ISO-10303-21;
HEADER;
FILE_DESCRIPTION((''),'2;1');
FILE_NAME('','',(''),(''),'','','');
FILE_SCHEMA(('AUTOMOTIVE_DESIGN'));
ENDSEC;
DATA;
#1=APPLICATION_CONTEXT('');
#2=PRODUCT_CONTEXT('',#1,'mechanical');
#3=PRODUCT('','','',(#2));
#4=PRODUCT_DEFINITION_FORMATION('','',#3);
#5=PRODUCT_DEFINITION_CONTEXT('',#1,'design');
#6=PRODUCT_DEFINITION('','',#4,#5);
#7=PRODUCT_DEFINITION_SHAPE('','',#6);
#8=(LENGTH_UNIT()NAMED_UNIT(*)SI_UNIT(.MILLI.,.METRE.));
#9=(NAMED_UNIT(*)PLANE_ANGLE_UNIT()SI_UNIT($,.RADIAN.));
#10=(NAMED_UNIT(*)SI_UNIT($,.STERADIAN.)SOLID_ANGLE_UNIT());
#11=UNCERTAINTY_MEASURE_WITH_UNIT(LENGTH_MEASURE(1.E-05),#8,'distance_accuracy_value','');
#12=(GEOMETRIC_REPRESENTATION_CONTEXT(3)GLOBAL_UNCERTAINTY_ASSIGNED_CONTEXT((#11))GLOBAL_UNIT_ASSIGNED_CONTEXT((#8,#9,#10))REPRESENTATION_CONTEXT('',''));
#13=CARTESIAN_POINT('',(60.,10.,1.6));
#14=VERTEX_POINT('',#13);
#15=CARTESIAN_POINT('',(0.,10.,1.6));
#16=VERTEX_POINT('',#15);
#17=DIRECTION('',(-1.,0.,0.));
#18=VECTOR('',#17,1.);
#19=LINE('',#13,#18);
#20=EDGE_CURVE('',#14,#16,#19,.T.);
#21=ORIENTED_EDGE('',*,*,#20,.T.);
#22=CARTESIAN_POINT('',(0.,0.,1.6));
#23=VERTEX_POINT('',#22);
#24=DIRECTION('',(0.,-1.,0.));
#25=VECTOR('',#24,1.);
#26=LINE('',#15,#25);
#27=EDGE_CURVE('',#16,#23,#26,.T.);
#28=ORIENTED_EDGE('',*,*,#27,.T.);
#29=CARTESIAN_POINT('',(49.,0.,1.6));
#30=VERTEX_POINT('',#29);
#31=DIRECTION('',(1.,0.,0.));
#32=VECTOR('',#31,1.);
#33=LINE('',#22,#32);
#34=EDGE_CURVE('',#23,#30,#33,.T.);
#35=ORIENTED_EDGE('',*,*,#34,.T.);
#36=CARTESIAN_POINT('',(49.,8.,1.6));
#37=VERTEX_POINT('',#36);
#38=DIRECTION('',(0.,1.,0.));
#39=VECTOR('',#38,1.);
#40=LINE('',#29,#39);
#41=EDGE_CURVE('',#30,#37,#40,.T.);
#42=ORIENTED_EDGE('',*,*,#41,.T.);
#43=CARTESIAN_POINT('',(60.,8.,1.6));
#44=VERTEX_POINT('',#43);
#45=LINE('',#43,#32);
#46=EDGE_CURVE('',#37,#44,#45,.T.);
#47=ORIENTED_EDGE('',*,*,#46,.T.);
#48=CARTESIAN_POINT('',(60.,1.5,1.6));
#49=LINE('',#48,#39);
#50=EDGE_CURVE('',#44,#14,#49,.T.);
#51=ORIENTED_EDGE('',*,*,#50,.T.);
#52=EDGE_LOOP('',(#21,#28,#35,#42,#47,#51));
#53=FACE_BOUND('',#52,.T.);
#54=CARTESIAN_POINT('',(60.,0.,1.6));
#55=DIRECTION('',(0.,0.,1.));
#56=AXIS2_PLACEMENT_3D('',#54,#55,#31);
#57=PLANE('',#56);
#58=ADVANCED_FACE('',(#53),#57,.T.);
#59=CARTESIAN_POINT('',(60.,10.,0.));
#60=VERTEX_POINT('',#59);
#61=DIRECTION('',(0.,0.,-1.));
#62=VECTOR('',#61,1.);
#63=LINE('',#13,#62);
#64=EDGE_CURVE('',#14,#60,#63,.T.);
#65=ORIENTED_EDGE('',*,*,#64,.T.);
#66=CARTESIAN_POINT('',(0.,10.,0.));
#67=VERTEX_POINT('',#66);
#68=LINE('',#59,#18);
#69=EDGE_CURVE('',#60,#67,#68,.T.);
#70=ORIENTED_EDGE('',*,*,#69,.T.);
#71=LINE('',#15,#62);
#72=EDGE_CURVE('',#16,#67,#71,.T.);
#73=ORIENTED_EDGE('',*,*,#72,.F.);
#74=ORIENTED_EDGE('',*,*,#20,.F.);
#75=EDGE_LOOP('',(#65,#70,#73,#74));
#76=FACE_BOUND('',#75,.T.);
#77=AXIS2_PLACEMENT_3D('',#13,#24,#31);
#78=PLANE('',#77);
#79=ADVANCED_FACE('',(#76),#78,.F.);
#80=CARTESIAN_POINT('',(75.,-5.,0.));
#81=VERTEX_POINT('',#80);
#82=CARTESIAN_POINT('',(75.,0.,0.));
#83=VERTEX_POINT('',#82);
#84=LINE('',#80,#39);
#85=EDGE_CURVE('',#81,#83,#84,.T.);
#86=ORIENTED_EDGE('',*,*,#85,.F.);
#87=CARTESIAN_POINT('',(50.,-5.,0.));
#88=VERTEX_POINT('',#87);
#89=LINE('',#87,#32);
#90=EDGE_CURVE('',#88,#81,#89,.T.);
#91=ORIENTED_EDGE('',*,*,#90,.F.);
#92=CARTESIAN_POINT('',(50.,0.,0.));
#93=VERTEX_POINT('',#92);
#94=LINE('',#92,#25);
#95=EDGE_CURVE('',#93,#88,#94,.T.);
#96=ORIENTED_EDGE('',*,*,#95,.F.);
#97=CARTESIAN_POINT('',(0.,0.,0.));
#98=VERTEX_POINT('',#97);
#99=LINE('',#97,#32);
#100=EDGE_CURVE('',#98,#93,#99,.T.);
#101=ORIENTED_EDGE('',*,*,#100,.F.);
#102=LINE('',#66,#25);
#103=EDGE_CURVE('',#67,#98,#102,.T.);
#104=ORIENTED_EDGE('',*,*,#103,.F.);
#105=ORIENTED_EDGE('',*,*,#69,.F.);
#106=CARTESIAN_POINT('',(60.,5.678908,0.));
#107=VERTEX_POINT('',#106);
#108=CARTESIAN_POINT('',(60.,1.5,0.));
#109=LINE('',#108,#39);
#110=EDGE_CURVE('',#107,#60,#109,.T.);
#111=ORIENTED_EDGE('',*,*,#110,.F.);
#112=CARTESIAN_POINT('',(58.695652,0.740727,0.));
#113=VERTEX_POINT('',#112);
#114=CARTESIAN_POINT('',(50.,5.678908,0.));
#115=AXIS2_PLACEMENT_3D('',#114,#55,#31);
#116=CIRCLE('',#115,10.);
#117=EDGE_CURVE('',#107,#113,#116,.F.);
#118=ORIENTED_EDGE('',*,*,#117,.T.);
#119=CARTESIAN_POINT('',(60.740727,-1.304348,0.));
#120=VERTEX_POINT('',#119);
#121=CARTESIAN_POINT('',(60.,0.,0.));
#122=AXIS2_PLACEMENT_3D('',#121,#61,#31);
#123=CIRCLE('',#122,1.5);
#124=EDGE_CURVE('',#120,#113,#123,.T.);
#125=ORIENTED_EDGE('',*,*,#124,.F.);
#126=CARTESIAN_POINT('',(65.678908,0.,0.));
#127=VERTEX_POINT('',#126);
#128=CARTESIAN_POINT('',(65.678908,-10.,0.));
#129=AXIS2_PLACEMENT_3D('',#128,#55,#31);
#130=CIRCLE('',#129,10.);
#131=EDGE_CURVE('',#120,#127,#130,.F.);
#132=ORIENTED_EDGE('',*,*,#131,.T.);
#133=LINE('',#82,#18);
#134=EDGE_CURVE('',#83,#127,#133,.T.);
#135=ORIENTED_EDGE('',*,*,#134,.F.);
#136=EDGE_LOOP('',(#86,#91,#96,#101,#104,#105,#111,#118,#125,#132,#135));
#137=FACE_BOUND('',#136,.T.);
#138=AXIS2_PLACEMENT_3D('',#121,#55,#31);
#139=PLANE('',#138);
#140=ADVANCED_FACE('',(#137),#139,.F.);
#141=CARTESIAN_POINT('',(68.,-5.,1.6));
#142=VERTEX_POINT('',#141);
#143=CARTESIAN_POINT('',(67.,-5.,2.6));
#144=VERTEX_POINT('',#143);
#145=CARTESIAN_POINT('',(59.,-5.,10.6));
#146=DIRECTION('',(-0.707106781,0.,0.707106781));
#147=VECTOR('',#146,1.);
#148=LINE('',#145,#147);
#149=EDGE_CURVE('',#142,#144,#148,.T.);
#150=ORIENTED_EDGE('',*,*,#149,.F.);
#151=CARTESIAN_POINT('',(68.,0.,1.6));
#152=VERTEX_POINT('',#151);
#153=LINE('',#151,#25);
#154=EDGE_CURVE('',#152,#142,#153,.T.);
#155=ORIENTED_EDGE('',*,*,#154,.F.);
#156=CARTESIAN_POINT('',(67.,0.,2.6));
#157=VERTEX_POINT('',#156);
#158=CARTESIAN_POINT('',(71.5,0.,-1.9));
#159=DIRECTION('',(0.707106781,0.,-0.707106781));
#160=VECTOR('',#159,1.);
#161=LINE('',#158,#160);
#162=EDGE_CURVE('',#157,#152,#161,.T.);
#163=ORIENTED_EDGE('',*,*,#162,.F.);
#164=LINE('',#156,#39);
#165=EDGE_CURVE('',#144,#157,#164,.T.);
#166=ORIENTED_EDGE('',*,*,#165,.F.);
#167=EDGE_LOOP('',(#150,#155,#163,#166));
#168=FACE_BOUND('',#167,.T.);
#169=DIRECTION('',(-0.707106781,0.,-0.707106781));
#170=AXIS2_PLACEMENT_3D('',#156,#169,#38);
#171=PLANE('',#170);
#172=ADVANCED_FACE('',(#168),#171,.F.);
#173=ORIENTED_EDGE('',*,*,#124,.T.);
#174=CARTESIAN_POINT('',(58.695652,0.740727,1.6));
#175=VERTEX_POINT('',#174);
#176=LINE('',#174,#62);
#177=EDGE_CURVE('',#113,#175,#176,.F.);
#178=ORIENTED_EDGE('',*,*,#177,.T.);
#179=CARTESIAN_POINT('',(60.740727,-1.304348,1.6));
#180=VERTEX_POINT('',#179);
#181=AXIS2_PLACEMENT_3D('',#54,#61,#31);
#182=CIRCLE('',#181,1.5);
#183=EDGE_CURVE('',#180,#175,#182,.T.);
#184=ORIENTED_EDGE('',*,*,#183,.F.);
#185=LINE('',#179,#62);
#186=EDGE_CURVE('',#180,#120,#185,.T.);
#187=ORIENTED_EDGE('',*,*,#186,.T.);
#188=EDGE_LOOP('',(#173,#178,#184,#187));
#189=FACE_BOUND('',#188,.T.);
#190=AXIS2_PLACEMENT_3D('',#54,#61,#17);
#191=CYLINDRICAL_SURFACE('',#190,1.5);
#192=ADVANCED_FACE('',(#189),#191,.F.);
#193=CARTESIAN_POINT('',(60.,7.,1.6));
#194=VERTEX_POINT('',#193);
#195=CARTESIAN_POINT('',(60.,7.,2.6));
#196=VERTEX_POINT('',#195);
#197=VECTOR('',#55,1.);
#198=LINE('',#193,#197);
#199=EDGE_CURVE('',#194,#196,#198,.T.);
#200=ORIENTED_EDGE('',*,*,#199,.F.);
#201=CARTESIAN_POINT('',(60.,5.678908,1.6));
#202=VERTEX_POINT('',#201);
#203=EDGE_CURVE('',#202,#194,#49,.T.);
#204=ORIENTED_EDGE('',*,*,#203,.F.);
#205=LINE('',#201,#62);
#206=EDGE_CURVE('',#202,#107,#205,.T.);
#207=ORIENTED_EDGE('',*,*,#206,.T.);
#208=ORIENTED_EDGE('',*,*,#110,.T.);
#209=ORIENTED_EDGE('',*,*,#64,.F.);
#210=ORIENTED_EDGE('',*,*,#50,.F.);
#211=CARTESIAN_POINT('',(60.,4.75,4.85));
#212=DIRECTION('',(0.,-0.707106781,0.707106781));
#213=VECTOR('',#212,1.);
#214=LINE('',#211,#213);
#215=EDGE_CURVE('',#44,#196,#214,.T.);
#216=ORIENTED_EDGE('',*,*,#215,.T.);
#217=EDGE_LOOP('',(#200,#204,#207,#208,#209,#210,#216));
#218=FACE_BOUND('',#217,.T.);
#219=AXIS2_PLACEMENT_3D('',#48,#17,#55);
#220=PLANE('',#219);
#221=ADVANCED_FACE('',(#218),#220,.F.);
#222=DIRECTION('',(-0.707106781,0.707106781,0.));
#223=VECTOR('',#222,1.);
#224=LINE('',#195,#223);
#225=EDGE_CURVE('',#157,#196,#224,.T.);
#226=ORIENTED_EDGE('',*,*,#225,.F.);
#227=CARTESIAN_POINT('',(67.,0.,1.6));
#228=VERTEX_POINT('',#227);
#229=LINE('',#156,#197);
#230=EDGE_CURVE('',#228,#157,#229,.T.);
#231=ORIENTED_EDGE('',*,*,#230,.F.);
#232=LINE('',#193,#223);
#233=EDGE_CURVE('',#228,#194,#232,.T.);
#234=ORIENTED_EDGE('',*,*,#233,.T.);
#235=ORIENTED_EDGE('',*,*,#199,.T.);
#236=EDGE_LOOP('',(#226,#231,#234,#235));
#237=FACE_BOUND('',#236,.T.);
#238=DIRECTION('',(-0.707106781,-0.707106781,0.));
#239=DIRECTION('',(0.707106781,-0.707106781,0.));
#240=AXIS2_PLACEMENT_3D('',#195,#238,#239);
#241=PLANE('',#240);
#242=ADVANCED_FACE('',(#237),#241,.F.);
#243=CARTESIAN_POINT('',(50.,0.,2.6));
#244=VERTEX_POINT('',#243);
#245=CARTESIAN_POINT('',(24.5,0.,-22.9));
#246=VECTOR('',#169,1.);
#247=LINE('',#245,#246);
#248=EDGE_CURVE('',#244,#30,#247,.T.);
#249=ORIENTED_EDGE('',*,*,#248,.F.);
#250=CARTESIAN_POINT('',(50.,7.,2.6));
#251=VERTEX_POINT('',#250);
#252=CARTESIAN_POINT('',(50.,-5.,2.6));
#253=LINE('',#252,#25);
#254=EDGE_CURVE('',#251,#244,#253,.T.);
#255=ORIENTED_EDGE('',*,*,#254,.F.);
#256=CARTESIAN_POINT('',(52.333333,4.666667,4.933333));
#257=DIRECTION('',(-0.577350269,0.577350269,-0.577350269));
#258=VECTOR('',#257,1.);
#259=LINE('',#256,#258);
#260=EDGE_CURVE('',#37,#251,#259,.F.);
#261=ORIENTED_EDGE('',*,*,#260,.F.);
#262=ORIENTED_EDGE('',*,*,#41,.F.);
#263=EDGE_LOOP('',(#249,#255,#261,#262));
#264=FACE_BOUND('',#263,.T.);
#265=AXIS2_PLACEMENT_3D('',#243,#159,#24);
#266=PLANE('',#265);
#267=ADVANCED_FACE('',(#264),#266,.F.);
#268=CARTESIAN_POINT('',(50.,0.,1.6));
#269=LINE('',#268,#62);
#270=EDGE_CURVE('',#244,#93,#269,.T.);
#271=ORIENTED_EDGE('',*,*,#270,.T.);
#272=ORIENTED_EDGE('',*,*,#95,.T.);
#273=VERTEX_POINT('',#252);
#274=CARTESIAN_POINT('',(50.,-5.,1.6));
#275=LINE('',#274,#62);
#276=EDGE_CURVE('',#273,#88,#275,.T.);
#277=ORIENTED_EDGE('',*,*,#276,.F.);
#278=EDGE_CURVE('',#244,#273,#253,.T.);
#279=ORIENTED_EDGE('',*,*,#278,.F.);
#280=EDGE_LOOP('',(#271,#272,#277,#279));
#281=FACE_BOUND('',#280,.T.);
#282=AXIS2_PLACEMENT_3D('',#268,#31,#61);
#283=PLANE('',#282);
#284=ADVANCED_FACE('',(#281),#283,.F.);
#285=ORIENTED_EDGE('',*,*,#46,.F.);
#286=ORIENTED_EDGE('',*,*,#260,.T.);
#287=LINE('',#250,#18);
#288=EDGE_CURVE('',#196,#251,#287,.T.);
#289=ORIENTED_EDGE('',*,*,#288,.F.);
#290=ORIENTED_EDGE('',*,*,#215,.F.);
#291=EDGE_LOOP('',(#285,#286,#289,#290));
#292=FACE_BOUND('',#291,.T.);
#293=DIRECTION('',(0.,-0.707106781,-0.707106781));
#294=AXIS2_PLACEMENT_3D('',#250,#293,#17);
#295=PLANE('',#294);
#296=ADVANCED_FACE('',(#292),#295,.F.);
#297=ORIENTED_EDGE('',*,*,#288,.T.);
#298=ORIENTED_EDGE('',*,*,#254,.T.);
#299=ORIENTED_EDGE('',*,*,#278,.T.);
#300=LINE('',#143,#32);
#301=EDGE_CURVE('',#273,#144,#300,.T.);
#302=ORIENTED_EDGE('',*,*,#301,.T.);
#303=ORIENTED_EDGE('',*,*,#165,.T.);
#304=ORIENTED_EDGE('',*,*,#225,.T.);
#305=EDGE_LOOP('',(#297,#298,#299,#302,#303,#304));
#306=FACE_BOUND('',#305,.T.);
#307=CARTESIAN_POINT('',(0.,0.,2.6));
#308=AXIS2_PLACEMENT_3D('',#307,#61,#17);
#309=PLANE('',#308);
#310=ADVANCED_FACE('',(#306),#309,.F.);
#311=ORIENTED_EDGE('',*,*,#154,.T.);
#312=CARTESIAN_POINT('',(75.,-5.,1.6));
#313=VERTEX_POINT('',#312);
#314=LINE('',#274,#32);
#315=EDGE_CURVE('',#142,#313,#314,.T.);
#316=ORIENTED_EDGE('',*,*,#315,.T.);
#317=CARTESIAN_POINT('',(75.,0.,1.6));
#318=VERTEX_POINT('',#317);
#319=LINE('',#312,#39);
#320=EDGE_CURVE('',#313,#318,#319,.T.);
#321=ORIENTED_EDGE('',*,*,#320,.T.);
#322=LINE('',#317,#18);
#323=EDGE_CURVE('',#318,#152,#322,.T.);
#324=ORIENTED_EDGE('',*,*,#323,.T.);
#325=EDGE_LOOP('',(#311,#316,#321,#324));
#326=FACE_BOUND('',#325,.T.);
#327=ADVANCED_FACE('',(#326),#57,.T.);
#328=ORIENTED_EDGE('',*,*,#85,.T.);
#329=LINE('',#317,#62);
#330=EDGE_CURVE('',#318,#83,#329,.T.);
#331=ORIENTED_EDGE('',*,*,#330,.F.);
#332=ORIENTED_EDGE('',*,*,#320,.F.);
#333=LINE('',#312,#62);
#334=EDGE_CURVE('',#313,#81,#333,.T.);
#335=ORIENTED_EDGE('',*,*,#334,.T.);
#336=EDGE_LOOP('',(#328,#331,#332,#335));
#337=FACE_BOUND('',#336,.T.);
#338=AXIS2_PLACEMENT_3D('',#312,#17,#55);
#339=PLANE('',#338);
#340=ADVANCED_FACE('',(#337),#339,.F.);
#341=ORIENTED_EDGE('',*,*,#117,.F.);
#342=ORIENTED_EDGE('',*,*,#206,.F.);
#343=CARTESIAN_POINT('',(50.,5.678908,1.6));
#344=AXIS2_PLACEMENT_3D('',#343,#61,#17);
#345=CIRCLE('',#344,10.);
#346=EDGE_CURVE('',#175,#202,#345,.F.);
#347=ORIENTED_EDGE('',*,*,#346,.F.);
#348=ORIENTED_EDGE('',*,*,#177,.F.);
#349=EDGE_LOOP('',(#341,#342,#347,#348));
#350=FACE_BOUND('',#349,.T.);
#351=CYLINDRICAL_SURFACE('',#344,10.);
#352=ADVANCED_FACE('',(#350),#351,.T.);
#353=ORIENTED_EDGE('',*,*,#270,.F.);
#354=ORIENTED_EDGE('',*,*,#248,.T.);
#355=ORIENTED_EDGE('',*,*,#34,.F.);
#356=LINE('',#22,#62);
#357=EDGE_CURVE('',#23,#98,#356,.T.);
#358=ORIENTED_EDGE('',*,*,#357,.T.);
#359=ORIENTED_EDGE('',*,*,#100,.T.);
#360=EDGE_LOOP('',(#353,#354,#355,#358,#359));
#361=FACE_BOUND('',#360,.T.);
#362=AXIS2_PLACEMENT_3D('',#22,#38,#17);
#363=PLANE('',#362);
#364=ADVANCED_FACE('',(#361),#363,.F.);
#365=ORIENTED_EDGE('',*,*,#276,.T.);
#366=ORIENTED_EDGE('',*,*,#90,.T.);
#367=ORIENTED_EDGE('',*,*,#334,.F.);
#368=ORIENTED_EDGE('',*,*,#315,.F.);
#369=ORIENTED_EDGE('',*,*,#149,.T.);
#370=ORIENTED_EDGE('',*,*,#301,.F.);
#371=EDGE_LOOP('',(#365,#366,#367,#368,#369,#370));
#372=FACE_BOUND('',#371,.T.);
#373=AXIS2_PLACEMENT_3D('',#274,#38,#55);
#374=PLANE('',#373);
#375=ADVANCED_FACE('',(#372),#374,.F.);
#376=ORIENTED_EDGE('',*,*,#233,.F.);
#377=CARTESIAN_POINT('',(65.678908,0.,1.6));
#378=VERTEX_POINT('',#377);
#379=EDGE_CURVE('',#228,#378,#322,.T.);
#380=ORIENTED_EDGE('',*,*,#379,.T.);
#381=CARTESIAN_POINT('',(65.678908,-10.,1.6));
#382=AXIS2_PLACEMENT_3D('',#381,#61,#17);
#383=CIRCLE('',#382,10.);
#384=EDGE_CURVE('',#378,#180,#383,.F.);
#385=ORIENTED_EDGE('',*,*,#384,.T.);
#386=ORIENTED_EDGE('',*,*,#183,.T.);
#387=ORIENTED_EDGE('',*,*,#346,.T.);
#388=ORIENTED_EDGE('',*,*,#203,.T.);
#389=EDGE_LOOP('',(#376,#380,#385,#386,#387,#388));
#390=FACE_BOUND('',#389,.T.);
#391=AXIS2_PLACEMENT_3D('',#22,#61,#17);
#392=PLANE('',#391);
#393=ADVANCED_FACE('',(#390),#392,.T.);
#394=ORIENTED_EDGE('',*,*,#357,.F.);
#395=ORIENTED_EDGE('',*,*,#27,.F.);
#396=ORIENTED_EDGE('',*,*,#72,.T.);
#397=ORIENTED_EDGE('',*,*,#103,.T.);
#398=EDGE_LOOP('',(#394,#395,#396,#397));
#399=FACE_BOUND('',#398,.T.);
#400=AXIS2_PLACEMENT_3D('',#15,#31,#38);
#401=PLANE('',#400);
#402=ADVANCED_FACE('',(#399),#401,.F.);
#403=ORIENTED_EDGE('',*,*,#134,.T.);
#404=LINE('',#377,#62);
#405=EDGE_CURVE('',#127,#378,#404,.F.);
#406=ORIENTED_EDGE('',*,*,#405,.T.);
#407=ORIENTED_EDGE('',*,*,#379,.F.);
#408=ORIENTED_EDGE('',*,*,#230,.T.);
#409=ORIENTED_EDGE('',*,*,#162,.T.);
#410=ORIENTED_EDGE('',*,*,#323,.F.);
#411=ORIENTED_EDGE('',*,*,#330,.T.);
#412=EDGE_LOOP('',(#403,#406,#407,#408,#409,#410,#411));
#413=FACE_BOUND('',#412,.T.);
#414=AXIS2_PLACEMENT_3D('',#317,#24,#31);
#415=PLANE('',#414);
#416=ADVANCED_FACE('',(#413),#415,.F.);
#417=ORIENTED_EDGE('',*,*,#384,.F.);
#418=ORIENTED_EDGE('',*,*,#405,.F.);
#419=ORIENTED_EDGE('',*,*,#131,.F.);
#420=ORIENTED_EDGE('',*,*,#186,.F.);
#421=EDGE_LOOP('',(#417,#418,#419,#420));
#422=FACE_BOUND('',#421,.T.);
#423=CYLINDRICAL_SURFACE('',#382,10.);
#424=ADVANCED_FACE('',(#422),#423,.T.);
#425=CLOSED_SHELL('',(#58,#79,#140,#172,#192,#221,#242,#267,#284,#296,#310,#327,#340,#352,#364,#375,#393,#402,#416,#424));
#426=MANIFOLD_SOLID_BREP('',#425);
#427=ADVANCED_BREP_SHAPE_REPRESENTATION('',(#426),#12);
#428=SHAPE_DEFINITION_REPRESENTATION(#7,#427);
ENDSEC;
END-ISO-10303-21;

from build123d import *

# Parameters (mm, degrees)
RESSALTO_EXTRUS_O1_DEPTH = 1.6
RESSALTO_EXTRUS_O2_DEPTH = 1
CHANFRO1_SIZE            = 1
FILETE1_R                = 10


with BuildPart() as part:
    # Esboço1 → Ressalto-extrusão1 (new body)
    with BuildSketch(Plane.XY):
        with BuildLine():
            Line((0, 0), (50, 0))
            Line((50, 0), (50, -5))
            Line((50, -5), (75, -5))
            Line((75, -5), (75, 0))
            Line((75, 0), (61.5, 0))
            ThreePointArc((61.5, 0), (58.939339828, -1.060660172), (60, 1.5))
            Line((60, 1.5), (60, 10))
            Line((60, 10), (0, 10))
            Line((0, 10), (0, 0))
        make_face()
    extrude(amount=RESSALTO_EXTRUS_O1_DEPTH)

    # Esboço2 → Ressalto-extrusão2 (add)
    with BuildSketch(Plane.XY.offset(1.6)):
        Polygon((60, 7), (67, 0), (67, -5), (50, -5), (50, 7), align=None)
    extrude(amount=RESSALTO_EXTRUS_O2_DEPTH)

    # Chanfro1
    # the kernel refuses this chamfer: 1 mm, written as the material it adds along each edge
    with BuildSketch(Plane(origin=(50, 7, 1.6), x_dir=(0, 0.9996219169112968, -0.02749587661058627), z_dir=(1, 0, 0))) as chanfro1_piece_1_section:
        Polygon((CHANFRO1_SIZE * 0.999621916911, CHANFRO1_SIZE * 0.0274958766106), (-CHANFRO1_SIZE * 0.0274958766106, CHANFRO1_SIZE * 0.999621916911), (0, 0), align=None)
    chanfro1_piece_1 = extrude(amount=10, mode=Mode.PRIVATE)
    chanfro1_piece_1 = split(chanfro1_piece_1, bisect_by=Plane(origin=(57.256943657, 9.743056343, 1.932086514), z_dir=(-0.7071067811865478, -0.7071067811865474, 0)), keep=Keep.TOP, mode=Mode.PRIVATE)
    chanfro1_piece_1 = split(chanfro1_piece_1, bisect_by=Plane(origin=(54.837757031, 7.323869717, 2.6), z_dir=(0, 0, -1)), keep=Keep.TOP, mode=Mode.PRIVATE)
    add(chanfro1_piece_1)
    with BuildSketch(Plane(origin=(50, 7, 1.6), x_dir=(0, 0.9996219169112968, -0.02749587661058627), z_dir=(1, 0, 0))) as chanfro1_piece_2_section:
        Polygon((CHANFRO1_SIZE * 0.999621916911, CHANFRO1_SIZE * 0.0274958766106), (-CHANFRO1_SIZE * 0.0274958766106, CHANFRO1_SIZE * 0.999621916911), (0, 0), align=None)
    chanfro1_piece_2 = extrude(amount=10, mode=Mode.PRIVATE)
    chanfro1_piece_2 = split(chanfro1_piece_2, bisect_by=Plane(origin=(59.609036426, 7.390963574, 1.827791028), z_dir=(0.7071067811865478, 0.7071067811865474, 0)), keep=Keep.TOP, mode=Mode.PRIVATE)
    add(chanfro1_piece_2)
    with BuildSketch(Plane(origin=(50, 0, 1.6), x_dir=(-0.9996219169112968, 0, -0.0274958766105862), z_dir=(0, 1, 0))) as chanfro1_piece_3_section:
        Polygon((CHANFRO1_SIZE * 0.999621916911, CHANFRO1_SIZE * 0.0274958766106), (-CHANFRO1_SIZE * 0.0274958766106, CHANFRO1_SIZE * 0.999621916911), (0, 0), align=None)
    chanfro1_piece_3 = extrude(amount=7, mode=Mode.PRIVATE)
    chanfro1_piece_3 = split(chanfro1_piece_3, bisect_by=Plane(origin=(49.669595846, 3.5, 2.6), z_dir=(0, 0, -1)), keep=Keep.TOP, mode=Mode.PRIVATE)
    add(chanfro1_piece_3)
    with BuildSketch(Plane(origin=(67, 0, 1.6), x_dir=(0.9996219169112968, 0, -0.02749587661058639), z_dir=(0, -1, 0))) as chanfro1_piece_4_section:
        Polygon((CHANFRO1_SIZE * 0.999621916911, CHANFRO1_SIZE * 0.0274958766106), (-CHANFRO1_SIZE * 0.0274958766106, CHANFRO1_SIZE * 0.999621916911), (0, 0), align=None)
    chanfro1_piece_4 = extrude(amount=5, mode=Mode.PRIVATE)
    chanfro1_piece_4 = split(chanfro1_piece_4, bisect_by=Plane(origin=(67.390963574, -0.390963574, 1.827791028), z_dir=(0.7071067811865478, 0.7071067811865474, 0)), keep=Keep.TOP, mode=Mode.PRIVATE)
    add(chanfro1_piece_4)
    with BuildSketch(Plane(origin=(67, 0, 1.6), x_dir=(0.9996219169112968, 0, -0.02749587661058639), z_dir=(0, -1, 0))) as chanfro1_piece_5_section:
        Polygon((CHANFRO1_SIZE * 0.999621916911, CHANFRO1_SIZE * 0.0274958766106), (-CHANFRO1_SIZE * 0.0274958766106, CHANFRO1_SIZE * 0.999621916911), (0, 0), align=None)
    chanfro1_piece_5 = extrude(amount=5, mode=Mode.PRIVATE)
    chanfro1_piece_5 = split(chanfro1_piece_5, bisect_by=Plane(origin=(67.316872032, -2.658755048, 2.6), z_dir=(0, 0, -1)), keep=Keep.TOP, mode=Mode.PRIVATE)
    chanfro1_piece_5 = split(chanfro1_piece_5, bisect_by=Plane(origin=(68.48781354, -1.48781354, 1.93578343), z_dir=(-0.7071067811865478, -0.7071067811865474, 0)), keep=Keep.TOP, mode=Mode.PRIVATE)
    add(chanfro1_piece_5)
    with BuildSketch(Plane(origin=(47.428317012, 7, 1.6), x_dir=(0, 0.9996219169112968, -0.02749587661058627), z_dir=(1, 0, 0))) as chanfro1_piece_6a_section:
        Polygon((CHANFRO1_SIZE * 0.999621916911, CHANFRO1_SIZE * 0.0274958766106), (-CHANFRO1_SIZE * 0.0274958766106, CHANFRO1_SIZE * 0.999621916911), (0, 0), align=None)
    chanfro1_piece_6a = extrude(amount=12.571682988, mode=Mode.PRIVATE)
    chanfro1_piece_6a = split(chanfro1_piece_6a, bisect_by=Plane(origin=(50, 7.330404154, 1.928634334), z_dir=(-1, 0, 0)), keep=Keep.TOP, mode=Mode.PRIVATE)
    chanfro1_piece_6a = split(chanfro1_piece_6a, bisect_by=Plane(origin=(48.714158506, 7.330404154, 2.6), z_dir=(0, 0, -1)), keep=Keep.TOP, mode=Mode.PRIVATE)
    with BuildSketch(Plane(origin=(50, 0, 1.6), x_dir=(-0.9996219169112968, 0, -0.0274958766105862), z_dir=(0, 1, 0))) as chanfro1_piece_6b_section:
        Polygon((CHANFRO1_SIZE * 0.999621916911, CHANFRO1_SIZE * 0.0274958766106), (-CHANFRO1_SIZE * 0.0274958766106, CHANFRO1_SIZE * 0.999621916911), (0, 0), align=None)
    chanfro1_piece_6b = extrude(amount=9.571682988, mode=Mode.PRIVATE)
    chanfro1_piece_6b = split(chanfro1_piece_6b, bisect_by=Plane(origin=(49.669595846, 7, 1.928634334), z_dir=(0, 1, 0)), keep=Keep.TOP, mode=Mode.PRIVATE)
    chanfro1_piece_6b = split(chanfro1_piece_6b, bisect_by=Plane(origin=(49.669595846, 8.285841494, 2.6), z_dir=(0, 0, -1)), keep=Keep.TOP, mode=Mode.PRIVATE)
    chanfro1_piece_6 = chanfro1_piece_6a & chanfro1_piece_6b
    add(chanfro1_piece_6)

    # Filete1
    filete1_edges = [part.edges().sort_by_distance(p)[0] for p in [
        (60, 1.5, 0.8),
        (61.5, 0, 0.8),
    ]]
    fillet(filete1_edges, radius=FILETE1_R)


solid = part.part
